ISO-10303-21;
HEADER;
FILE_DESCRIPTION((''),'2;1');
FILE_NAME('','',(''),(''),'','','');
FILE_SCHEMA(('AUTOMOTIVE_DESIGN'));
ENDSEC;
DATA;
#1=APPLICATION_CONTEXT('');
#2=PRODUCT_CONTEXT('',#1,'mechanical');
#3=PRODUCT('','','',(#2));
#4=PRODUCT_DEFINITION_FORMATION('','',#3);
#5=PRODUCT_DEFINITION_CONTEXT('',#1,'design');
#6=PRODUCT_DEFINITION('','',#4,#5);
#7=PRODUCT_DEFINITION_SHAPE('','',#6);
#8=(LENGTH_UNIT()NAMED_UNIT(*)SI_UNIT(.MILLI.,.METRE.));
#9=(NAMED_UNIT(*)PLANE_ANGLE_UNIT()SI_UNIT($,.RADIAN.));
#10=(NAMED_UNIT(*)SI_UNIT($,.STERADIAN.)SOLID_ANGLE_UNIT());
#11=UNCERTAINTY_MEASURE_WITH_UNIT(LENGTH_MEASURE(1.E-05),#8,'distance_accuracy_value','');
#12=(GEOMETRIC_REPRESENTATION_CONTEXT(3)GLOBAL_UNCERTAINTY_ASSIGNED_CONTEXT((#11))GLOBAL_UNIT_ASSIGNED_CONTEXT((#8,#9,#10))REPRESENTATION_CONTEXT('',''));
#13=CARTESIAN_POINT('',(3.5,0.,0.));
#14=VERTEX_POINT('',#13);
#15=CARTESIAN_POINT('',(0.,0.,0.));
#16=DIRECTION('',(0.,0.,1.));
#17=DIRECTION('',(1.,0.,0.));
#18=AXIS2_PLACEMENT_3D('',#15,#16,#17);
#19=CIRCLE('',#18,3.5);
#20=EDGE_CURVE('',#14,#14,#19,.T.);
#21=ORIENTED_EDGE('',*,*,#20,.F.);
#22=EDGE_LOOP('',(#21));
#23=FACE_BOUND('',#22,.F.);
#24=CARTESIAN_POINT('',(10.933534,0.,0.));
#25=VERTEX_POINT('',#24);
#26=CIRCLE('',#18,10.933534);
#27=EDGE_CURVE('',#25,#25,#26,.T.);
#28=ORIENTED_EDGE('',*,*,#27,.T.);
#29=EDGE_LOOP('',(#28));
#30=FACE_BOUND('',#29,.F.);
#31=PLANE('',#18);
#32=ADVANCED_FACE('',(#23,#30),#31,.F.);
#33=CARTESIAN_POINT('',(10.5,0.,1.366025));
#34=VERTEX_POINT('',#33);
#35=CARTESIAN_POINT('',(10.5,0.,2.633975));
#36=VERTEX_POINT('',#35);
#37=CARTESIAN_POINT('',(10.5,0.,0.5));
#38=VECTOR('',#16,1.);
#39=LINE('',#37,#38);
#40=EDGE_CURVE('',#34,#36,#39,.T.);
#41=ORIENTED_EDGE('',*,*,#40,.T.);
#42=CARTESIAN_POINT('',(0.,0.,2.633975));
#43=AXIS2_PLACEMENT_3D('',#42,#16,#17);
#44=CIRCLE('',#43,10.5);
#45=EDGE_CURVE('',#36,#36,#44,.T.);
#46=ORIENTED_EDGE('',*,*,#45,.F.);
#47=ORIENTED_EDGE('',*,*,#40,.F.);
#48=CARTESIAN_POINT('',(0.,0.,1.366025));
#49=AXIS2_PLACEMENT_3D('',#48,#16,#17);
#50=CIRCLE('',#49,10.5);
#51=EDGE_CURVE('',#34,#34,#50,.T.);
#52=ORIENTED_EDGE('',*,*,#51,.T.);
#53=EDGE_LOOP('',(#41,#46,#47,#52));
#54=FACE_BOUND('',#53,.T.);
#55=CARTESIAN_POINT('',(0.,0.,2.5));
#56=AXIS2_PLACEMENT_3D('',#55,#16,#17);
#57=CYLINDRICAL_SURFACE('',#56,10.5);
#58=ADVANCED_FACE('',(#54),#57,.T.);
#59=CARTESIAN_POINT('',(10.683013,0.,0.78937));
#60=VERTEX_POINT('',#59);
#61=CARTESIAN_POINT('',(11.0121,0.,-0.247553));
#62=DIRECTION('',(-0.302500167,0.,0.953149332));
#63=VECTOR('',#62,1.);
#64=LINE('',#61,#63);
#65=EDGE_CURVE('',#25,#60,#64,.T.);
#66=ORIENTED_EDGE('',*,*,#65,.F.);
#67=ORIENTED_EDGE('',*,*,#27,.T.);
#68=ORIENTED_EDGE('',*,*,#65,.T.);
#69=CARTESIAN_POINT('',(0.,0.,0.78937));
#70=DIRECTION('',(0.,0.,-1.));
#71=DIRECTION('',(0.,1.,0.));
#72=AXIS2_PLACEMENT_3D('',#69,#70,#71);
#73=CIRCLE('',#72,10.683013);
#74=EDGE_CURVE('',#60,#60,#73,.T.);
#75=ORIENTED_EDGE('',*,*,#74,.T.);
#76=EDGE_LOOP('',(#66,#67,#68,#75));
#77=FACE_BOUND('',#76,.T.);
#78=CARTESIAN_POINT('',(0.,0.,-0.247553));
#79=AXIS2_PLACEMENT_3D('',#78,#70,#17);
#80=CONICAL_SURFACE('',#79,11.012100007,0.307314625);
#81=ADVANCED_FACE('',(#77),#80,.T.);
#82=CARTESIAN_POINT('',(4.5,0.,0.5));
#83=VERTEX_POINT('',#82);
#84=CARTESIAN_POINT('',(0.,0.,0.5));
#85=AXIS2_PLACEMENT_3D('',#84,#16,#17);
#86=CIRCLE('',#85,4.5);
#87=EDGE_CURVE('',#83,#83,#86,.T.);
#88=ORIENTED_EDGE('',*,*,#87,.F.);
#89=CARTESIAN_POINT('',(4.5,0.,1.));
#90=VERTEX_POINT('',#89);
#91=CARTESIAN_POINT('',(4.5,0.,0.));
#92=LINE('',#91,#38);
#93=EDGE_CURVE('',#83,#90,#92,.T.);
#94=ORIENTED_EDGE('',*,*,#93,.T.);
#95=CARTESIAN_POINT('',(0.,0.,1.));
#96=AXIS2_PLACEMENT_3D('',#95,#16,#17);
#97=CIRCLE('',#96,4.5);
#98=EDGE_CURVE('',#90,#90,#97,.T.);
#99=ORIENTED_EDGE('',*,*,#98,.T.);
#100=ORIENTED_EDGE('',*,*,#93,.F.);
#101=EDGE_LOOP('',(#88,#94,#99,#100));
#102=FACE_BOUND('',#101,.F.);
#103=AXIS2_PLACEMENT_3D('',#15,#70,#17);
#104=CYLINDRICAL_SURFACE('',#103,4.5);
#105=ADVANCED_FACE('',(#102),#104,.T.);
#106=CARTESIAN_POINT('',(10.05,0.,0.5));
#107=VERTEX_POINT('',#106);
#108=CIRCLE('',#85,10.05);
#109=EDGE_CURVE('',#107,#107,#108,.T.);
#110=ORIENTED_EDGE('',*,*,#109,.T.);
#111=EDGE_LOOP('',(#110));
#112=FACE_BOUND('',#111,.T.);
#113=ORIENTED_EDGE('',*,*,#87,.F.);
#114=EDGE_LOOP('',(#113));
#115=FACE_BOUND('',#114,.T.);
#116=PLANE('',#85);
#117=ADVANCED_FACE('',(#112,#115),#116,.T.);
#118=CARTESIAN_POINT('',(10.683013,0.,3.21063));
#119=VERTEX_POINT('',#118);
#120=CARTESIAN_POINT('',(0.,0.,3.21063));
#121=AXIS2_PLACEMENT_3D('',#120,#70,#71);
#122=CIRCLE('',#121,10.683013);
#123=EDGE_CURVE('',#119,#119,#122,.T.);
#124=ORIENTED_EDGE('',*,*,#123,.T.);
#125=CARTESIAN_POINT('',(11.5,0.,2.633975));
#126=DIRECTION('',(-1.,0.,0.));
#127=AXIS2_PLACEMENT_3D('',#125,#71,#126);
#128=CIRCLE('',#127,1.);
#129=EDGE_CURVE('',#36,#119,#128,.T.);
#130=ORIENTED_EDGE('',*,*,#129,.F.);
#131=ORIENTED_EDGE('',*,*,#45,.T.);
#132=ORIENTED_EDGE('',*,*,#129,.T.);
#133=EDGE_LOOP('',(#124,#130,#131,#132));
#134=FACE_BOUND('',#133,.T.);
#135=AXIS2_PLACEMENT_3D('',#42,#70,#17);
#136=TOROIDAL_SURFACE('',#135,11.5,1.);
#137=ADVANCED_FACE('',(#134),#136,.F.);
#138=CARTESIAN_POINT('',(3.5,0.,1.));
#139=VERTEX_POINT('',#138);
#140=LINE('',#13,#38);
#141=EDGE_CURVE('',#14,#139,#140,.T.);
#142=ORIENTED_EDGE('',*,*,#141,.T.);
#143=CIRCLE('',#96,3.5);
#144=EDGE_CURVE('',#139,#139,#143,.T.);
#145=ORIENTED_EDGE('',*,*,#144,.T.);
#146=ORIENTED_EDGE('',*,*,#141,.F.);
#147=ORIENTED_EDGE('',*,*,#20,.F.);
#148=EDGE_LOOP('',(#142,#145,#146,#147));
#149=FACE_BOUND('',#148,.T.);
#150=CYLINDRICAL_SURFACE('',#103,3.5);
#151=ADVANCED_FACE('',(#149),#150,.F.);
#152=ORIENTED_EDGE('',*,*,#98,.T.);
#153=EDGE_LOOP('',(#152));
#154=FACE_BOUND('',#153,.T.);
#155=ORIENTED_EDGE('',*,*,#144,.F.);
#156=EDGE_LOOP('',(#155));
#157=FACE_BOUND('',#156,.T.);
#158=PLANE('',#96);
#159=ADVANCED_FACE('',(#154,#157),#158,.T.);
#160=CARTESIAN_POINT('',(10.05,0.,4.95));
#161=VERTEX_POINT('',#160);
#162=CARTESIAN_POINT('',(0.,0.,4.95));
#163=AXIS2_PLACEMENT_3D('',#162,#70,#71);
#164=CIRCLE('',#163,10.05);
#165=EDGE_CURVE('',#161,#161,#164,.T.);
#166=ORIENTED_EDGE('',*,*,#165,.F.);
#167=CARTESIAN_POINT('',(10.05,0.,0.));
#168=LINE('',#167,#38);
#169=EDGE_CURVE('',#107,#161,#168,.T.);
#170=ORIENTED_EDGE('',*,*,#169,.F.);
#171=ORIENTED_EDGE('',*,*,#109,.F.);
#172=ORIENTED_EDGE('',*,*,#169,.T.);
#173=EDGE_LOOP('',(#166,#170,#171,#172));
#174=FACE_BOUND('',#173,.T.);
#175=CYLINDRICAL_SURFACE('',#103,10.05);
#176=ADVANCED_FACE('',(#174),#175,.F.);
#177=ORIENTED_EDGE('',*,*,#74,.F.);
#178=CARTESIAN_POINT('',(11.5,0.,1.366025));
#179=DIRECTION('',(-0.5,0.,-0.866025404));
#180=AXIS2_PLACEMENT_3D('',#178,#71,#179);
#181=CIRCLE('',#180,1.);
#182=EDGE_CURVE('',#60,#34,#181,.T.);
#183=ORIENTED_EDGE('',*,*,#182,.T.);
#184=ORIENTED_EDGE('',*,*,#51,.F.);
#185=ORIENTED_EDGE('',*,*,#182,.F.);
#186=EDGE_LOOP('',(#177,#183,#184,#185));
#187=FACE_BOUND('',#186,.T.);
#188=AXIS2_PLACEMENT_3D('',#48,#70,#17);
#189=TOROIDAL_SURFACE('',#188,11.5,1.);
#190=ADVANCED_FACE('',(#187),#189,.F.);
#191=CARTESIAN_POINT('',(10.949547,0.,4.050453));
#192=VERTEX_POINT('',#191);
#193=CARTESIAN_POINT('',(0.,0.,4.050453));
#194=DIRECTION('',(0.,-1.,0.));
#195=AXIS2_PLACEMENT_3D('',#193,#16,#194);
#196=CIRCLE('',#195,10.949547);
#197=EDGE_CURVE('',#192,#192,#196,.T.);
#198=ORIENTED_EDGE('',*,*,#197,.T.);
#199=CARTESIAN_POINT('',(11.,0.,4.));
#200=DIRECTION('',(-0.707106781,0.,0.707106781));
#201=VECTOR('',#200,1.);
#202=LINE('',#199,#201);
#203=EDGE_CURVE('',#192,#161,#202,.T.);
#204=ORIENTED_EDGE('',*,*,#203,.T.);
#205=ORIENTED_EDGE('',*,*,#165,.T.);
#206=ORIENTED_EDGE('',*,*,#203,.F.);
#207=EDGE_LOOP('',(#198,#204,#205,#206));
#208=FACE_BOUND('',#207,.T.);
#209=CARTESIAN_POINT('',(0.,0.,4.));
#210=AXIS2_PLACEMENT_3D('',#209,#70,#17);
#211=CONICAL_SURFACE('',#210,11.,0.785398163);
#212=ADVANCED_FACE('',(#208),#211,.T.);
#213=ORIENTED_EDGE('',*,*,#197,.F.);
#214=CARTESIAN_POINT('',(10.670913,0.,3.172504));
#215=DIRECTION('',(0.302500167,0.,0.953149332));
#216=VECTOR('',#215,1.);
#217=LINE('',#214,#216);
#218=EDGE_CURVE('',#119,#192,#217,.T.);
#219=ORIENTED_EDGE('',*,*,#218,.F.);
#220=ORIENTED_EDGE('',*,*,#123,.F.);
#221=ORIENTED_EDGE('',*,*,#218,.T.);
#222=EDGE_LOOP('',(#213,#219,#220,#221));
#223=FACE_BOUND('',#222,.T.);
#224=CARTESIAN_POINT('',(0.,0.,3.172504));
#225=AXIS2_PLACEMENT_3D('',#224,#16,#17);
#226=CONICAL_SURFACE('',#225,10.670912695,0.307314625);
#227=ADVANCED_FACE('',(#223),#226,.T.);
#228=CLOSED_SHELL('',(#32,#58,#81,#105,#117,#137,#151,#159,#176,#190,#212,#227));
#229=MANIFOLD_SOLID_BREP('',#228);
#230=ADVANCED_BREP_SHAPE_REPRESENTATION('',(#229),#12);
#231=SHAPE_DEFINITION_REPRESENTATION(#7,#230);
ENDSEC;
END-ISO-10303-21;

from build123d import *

# Parameters (mm, degrees)
F0_R          = 11
F0_R_2        = 10.5
F0_R_3        = 10.05
F1_DEPTH      = 5
F4_R          = 11
F4_R_2        = 10.5
F5_DEPTH      = 2
F5_DEPTH_BACK = 1
F0_R_4        = 4.5
F9_DEPTH      = 0.5
F0_R_5        = 3.5
F10_DEPTH     = 1


# Not quite as in the source:
# - a fillet or chamfer that OpenCascade refuses, or shapes differently, is made with other operations: its cross-section is extruded or revolved along the edge and cut away or added


with BuildPart() as f1:
    # F0 (on Top) → F1 (new body)
    with BuildSketch(Plane.XY):
        Circle(F0_R)
        Circle(F0_R_2, mode=Mode.SUBTRACT)
        Circle(F0_R_2)
        Circle(F0_R_3, mode=Mode.SUBTRACT)
    extrude(amount=F1_DEPTH)

    # F4 (on plane+point) → F5 (cut, two sides)
    with BuildSketch(Plane.XY.offset(2.5)) as f5_sk:
        Circle(F4_R)
        Circle(F4_R_2, mode=Mode.SUBTRACT)
    extrude(amount=-F5_DEPTH, mode=Mode.SUBTRACT)
    extrude(f5_sk.sketch, amount=F5_DEPTH_BACK, mode=Mode.SUBTRACT)

    # F6: chamfer of 1 on 1 edges, made by hand

    # F6_s1 → F6_t2 (revolve, cut)
    with BuildSketch(Plane.XZ):
        Polygon((11, 4), (10, 5), (11, 5), align=None)
    revolve(axis=Axis((0, 0, 5), (0, 0, 1)), mode=Mode.SUBTRACT)

    # F7: fillet of radius 1 on 2 edges, made by hand

    # F7_s1 → F7_t2 (revolve)
    with BuildSketch(Plane.XZ):
        with BuildLine():
            ThreePointArc((10.5, 2.6339745962), (10.6339745962, 3.1339745962), (11, 3.5))
            Line((11, 3.5), (10.5, 3.5))
            Line((10.5, 3.5), (10.5, 2.6339745962))
        make_face()
    revolve(axis=Axis((0, 0, 3.5), (0, 0, 1)))

    # F7_s3 → F7_t4 (revolve)
    with BuildSketch(Plane.XZ):
        with BuildLine():
            ThreePointArc((11, 0.5), (10.6339745962, 0.8660254038), (10.5, 1.3660254038))
            Line((10.5, 1.3660254038), (10.5, 0.5))
            Line((10.5, 0.5), (11, 0.5))
        make_face()
    revolve(axis=Axis((0, 0, 0.5), (0, 0, 1)))

    # F8: chamfer of 1 on 2 edges, made by hand

    # F8_s1 → F8_t2 (revolve, cut)
    with BuildSketch(Plane.XZ):
        with BuildLine():
            Line((10.6709126952, 3.1725042869), (11.0121000067, 4.2475531418))
            Line((11.0121000067, 4.2475531418), (11.0321000067, 4.2475531418))
            ThreePointArc((11.0321000067, 4.2475531418), (11.02, 3.8737765709), (11.02, 3.5))
            Line((11.02, 3.5), (11.01, 3.4826794919))
            ThreePointArc((11.01, 3.4826794919), (10.8264226951, 3.3457987418), (10.6872524412, 3.1609711736))
            Line((10.6872524412, 3.1609711736), (10.6709126952, 3.1725042869))
        make_face()
    revolve(axis=Axis((0, 0, 3.5), (0, 0, 1)), mode=Mode.SUBTRACT)

    # F8_s3 → F8_t4 (revolve, cut)
    with BuildSketch(Plane.XZ):
        with BuildLine():
            Line((11.0121000067, -0.2475531418), (10.6709126952, 0.8274957131))
            Line((10.6709126952, 0.8274957131), (10.6872524412, 0.8390288264))
            ThreePointArc((10.6872524412, 0.8390288264), (10.8264226951, 0.6542012582), (11.01, 0.5173205081))
            Line((11.01, 0.5173205081), (11.02, 0.5))
            ThreePointArc((11.02, 0.5), (11.02, 0.1262234291), (11.0321000067, -0.2475531418))
            Line((11.0321000067, -0.2475531418), (11.0121000067, -0.2475531418))
        make_face()
    revolve(axis=Axis((0, 0, 0.5), (0, 0, 1)), mode=Mode.SUBTRACT)

    # F0 (on Top) → F9 (join)
    with BuildSketch(Plane.XY):
        Circle(F0_R_3)
        Circle(F0_R_4, mode=Mode.SUBTRACT)
    extrude(amount=F9_DEPTH)

    # F0 (on Top) → F10 (join)
    with BuildSketch(Plane.XY):
        Circle(F0_R_4)
        Circle(F0_R_5, mode=Mode.SUBTRACT)
    extrude(amount=F10_DEPTH)


solid = f1.part
